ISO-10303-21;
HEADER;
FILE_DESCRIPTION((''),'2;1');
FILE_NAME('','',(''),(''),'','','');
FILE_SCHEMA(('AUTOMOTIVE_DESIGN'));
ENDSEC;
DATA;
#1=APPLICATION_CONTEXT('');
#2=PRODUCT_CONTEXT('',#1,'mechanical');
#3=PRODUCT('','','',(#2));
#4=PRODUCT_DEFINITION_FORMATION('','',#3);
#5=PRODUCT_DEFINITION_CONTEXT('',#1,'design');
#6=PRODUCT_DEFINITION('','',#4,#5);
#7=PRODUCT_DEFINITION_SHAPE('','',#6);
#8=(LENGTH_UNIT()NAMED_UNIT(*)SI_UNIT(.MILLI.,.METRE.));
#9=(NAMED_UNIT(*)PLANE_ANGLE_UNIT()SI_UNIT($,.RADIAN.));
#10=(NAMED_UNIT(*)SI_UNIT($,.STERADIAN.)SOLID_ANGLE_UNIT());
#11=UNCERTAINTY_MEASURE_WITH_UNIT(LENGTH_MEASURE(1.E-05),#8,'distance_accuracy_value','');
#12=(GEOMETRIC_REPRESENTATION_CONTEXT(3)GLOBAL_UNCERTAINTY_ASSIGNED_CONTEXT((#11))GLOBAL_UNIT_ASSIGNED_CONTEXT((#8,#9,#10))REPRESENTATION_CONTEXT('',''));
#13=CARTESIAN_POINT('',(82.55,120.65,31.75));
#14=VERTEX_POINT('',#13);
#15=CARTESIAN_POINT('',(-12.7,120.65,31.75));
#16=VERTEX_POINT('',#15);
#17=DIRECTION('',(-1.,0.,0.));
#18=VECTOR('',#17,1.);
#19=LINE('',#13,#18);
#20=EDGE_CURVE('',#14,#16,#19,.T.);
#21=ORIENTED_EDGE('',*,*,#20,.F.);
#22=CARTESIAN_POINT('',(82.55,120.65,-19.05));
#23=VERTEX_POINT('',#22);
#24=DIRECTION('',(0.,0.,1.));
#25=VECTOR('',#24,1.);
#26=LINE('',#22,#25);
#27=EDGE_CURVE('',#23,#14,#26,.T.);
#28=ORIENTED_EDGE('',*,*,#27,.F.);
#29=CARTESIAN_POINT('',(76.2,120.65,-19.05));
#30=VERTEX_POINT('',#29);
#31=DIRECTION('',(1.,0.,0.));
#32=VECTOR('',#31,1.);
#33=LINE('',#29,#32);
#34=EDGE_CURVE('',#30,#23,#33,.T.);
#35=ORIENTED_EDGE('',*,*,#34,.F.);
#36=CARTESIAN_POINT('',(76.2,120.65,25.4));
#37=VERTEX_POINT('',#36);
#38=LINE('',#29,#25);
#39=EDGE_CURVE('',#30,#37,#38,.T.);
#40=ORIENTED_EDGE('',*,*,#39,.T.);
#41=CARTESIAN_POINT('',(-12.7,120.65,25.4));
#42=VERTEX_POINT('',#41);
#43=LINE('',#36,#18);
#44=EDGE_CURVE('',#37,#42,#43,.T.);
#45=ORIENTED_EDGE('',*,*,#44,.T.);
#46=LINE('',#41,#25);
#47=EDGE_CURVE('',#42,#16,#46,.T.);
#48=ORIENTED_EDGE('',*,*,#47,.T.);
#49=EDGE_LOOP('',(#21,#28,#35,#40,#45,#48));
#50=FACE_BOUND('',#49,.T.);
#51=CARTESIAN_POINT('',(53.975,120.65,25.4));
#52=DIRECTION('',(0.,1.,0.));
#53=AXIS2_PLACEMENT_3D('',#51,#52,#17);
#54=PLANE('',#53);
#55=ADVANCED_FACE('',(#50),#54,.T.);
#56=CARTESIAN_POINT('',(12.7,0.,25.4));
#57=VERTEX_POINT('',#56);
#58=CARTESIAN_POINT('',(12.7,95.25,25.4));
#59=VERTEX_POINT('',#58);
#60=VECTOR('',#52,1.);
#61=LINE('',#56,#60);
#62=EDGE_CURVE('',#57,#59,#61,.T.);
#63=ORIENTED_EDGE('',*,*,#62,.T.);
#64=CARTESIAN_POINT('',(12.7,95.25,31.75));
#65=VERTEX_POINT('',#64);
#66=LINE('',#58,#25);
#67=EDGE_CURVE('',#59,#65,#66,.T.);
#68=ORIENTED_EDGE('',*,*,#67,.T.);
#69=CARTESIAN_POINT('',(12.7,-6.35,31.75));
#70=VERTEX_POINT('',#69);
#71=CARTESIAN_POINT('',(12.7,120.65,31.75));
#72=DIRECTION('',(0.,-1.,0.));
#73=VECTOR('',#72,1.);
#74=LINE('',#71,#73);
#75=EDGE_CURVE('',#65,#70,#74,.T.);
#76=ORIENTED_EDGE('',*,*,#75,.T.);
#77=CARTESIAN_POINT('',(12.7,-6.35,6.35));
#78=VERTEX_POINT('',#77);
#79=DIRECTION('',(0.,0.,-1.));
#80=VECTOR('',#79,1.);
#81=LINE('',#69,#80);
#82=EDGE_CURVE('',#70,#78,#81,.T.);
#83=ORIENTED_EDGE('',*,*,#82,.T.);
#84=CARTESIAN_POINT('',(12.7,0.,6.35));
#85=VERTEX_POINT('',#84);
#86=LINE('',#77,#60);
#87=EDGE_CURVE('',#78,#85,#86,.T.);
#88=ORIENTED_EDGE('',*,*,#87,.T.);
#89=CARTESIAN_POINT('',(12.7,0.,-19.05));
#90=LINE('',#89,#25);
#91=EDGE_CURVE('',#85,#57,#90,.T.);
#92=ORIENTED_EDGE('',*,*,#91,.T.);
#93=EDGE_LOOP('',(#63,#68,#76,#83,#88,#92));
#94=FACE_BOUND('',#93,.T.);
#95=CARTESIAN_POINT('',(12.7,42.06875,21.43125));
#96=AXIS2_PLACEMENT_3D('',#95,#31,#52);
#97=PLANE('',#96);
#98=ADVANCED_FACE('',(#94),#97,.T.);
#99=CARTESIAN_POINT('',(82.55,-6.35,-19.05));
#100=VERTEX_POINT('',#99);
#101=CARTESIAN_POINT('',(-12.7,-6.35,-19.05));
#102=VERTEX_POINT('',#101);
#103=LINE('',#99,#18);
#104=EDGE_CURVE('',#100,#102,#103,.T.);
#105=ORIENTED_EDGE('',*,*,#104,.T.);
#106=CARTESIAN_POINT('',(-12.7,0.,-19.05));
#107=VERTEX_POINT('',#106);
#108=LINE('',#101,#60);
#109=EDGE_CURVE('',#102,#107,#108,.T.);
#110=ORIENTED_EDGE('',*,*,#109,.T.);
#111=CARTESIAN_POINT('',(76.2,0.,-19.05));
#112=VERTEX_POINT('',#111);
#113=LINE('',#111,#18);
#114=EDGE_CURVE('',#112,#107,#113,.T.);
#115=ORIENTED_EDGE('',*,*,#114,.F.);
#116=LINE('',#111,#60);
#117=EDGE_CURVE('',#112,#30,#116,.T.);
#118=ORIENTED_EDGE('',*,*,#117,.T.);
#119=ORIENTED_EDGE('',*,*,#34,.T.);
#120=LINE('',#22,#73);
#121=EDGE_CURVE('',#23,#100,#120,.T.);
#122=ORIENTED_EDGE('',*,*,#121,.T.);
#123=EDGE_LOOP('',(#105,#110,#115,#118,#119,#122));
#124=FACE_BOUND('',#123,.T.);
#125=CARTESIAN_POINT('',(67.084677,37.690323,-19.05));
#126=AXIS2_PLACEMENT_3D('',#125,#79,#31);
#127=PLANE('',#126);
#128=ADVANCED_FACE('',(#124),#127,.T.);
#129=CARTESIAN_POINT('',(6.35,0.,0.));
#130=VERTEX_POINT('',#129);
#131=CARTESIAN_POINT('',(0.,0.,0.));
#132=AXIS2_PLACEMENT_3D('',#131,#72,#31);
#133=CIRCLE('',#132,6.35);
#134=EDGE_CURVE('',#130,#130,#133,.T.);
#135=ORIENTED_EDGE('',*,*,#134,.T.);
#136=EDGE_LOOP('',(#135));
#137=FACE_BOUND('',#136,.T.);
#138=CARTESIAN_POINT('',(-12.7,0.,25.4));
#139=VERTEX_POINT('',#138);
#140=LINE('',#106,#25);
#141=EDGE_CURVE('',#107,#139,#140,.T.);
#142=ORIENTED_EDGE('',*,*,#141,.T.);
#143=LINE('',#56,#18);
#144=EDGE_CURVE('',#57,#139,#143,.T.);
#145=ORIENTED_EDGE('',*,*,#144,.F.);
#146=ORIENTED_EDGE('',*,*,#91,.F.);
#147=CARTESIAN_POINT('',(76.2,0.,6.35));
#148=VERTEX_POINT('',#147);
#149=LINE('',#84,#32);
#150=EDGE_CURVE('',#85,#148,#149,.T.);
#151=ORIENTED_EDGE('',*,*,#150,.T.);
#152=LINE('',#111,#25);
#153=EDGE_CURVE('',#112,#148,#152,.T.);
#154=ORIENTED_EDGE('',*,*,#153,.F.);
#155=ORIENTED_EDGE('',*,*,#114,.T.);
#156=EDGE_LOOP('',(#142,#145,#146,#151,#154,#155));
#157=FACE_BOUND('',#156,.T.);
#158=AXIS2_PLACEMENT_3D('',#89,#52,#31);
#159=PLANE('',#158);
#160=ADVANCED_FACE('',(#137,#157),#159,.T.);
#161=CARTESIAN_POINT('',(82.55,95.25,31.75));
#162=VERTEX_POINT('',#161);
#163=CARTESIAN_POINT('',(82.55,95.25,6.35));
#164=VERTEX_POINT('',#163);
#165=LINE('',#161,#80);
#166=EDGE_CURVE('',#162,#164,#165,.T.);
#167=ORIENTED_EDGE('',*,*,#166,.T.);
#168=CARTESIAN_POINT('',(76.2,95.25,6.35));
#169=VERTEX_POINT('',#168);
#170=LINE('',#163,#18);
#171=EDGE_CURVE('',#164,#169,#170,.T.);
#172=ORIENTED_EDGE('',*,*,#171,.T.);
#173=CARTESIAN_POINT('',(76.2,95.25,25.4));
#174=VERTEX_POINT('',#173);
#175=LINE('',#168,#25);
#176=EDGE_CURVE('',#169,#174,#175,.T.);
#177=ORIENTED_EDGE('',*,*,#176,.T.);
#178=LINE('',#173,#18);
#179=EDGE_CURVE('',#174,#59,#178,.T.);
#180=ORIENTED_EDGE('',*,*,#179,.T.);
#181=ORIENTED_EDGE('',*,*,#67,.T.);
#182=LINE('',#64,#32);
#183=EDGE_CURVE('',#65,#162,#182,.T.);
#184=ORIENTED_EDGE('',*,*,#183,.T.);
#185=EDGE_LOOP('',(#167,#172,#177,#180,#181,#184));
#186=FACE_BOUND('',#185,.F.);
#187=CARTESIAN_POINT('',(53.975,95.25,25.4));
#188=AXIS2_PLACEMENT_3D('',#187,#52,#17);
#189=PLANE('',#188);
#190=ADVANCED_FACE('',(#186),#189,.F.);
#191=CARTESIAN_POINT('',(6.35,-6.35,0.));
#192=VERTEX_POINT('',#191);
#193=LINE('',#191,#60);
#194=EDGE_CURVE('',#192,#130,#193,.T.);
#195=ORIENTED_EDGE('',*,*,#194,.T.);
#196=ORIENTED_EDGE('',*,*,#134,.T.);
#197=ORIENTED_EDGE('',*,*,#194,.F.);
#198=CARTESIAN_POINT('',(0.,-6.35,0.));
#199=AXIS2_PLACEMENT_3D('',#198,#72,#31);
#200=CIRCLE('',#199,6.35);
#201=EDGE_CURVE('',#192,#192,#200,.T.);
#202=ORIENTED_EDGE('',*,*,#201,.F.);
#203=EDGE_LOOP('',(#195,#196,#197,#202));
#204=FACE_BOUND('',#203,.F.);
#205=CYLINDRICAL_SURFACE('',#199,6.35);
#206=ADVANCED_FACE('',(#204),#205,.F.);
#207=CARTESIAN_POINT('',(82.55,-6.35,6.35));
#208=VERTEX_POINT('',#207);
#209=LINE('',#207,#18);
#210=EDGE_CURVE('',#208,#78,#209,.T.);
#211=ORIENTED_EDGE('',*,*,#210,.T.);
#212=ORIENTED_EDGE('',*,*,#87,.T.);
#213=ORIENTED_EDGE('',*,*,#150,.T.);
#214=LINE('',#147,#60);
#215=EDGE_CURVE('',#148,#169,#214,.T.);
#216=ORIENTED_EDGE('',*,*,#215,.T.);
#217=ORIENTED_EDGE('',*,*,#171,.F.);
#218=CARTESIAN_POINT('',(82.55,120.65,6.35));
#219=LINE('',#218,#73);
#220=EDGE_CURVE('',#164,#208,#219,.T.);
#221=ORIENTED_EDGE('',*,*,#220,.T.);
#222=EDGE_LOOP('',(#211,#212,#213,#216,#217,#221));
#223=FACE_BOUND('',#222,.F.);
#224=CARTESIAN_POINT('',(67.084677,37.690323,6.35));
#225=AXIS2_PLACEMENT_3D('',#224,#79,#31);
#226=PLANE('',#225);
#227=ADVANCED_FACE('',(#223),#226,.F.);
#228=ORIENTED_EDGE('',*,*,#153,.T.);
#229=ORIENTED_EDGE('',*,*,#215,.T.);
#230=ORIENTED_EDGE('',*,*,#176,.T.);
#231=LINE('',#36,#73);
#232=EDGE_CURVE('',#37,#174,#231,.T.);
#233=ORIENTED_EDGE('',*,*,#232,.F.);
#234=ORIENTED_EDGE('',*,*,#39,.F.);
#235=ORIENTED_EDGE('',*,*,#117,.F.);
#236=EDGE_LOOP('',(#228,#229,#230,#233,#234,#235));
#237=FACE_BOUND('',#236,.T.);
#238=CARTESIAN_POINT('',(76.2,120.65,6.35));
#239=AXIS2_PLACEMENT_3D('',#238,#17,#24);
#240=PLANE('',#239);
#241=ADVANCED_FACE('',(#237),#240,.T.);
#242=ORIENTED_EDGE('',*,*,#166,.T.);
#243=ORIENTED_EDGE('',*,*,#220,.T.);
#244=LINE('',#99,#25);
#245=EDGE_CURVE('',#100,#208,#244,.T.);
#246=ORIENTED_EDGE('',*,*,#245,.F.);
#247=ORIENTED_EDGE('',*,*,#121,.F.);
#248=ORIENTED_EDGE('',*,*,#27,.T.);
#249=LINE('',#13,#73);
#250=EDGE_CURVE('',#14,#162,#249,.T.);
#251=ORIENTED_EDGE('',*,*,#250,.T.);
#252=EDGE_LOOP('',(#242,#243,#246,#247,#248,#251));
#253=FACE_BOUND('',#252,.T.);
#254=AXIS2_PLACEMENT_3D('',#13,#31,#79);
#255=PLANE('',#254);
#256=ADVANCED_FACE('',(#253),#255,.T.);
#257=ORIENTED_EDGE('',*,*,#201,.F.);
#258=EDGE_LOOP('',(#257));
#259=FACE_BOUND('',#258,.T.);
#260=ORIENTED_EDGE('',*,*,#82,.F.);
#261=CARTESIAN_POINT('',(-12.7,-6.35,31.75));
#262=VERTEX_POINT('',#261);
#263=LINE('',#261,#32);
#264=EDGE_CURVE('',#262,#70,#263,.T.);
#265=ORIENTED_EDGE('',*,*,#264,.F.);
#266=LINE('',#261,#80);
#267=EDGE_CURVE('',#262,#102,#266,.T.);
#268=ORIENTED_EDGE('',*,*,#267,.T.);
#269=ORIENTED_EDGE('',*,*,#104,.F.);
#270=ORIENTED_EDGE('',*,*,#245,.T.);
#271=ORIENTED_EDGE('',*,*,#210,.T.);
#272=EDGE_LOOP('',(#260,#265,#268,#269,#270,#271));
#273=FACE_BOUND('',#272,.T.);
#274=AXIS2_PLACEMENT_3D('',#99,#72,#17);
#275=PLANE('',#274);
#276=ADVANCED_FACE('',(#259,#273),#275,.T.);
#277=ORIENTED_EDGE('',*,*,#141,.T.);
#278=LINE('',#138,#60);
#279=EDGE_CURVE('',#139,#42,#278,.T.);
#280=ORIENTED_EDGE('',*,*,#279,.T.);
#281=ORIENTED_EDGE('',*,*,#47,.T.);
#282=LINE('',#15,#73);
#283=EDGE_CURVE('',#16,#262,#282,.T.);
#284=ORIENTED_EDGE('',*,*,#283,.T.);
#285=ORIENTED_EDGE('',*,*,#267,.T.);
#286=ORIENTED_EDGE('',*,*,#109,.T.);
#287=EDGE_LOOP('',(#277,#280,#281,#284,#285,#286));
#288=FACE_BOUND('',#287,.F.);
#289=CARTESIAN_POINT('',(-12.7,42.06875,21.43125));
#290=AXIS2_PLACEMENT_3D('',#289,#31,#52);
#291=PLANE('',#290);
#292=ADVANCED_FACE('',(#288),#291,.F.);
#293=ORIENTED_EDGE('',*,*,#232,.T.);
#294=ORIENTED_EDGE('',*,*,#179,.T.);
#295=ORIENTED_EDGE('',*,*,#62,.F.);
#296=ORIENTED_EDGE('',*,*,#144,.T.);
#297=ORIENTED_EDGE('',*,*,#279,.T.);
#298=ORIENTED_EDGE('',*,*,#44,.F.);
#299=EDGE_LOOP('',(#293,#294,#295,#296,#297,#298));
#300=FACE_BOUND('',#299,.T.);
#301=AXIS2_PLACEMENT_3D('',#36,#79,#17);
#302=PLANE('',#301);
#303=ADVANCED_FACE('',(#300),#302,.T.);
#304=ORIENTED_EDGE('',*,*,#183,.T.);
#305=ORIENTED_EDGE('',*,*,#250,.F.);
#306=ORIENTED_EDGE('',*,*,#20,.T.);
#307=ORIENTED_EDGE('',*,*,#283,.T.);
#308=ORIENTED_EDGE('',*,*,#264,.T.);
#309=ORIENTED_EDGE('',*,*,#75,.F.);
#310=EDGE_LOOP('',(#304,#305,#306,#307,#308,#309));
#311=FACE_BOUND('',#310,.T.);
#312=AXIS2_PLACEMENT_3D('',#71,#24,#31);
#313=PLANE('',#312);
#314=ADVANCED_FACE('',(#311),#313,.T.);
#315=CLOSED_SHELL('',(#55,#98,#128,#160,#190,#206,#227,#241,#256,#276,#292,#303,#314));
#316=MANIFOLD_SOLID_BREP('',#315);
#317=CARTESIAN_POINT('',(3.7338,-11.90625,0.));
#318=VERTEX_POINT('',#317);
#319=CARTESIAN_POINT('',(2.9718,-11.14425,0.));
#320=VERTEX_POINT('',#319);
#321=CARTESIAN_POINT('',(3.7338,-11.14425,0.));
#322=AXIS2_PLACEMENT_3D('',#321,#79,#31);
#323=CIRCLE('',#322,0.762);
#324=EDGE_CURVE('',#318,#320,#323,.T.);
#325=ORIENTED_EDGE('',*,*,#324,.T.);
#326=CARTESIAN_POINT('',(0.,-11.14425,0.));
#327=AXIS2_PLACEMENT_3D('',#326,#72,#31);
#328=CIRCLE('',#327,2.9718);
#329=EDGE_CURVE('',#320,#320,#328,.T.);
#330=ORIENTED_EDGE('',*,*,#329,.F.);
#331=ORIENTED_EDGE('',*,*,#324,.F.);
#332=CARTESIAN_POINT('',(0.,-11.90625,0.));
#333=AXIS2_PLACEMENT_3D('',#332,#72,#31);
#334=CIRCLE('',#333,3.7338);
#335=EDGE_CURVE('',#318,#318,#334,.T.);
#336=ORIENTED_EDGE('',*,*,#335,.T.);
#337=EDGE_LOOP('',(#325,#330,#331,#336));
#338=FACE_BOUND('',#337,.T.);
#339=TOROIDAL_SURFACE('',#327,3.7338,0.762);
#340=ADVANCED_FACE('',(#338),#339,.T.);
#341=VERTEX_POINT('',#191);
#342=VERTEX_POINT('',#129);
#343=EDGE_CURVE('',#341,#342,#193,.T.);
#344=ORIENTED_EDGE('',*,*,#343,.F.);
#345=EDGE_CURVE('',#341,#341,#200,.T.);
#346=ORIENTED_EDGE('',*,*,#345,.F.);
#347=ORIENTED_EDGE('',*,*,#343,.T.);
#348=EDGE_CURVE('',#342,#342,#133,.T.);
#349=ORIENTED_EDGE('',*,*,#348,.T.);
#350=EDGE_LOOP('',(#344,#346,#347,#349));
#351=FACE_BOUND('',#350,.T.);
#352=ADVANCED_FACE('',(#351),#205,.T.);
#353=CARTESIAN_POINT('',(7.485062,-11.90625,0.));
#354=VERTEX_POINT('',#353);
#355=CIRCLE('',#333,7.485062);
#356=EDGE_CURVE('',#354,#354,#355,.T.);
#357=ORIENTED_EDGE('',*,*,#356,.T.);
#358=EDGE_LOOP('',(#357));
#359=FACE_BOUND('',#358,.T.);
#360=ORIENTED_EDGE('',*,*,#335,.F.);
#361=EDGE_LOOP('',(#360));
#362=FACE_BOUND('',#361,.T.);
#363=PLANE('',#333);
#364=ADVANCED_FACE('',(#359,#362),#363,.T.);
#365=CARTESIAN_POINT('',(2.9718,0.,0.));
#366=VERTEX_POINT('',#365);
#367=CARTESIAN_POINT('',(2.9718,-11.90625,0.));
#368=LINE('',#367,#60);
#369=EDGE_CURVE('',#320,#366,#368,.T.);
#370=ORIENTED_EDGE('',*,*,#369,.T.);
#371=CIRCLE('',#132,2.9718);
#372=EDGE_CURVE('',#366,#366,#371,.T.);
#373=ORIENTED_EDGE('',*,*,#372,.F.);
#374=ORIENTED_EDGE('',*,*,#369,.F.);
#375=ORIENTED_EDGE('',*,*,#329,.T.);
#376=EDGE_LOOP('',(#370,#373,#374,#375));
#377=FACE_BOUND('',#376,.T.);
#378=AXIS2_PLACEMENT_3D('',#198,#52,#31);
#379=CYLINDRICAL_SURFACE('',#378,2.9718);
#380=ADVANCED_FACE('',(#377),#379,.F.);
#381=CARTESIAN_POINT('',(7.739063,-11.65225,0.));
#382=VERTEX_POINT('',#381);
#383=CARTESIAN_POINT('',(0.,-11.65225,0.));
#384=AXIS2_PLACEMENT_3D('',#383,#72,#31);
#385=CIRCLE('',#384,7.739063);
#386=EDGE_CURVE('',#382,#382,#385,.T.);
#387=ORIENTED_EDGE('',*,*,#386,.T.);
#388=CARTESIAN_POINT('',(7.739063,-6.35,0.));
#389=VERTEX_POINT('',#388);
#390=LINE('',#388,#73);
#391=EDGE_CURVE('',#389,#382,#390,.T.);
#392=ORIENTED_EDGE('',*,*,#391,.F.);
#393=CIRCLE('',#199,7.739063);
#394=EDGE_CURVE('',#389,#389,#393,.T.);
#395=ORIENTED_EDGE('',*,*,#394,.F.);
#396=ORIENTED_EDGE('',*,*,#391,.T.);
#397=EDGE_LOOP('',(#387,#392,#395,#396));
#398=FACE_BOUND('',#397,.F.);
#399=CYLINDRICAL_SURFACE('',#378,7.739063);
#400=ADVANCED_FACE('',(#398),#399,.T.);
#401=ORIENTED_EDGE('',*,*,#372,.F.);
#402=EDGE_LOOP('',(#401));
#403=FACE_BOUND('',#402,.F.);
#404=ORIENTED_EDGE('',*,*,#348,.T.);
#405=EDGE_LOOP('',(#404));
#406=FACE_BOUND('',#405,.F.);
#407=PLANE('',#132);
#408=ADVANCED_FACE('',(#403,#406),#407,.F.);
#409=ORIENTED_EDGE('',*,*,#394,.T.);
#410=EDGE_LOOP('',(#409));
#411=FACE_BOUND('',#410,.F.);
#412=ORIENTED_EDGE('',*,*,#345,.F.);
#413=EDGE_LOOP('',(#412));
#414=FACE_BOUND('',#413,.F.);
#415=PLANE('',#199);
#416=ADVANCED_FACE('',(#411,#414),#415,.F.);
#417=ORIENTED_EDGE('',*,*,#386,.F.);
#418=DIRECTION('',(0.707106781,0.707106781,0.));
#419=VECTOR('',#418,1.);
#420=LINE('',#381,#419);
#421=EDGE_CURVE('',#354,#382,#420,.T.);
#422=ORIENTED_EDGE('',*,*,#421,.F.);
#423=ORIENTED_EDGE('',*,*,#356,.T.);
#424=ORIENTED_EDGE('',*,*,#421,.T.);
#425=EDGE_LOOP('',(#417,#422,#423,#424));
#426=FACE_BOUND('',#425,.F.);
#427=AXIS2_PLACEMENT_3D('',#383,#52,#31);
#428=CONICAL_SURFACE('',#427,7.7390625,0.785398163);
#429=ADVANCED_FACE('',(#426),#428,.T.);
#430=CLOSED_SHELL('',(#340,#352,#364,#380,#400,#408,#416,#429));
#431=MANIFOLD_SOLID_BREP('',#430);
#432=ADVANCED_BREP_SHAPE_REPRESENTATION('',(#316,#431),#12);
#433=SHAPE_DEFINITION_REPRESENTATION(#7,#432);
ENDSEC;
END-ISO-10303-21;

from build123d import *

# Parameters (mm, degrees)
F1_DEPTH      = 12.7
F1_DEPTH_BACK = 12.7
F3_DEPTH      = 25.4
F5_DEPTH      = 25.4
F6_R          = 6.35
F7_DEPTH      = 6.35
F8_R          = 6.35
F8_R_2        = 2.9718
F9_DEPTH      = 6.35
F10_R         = 7.7390625
F10_R_2       = 2.9718
F11_DEPTH     = 5.55625
F12_R         = 0.762
F13_SIZE      = 0.254


with BuildPart() as f1:
    # F0 (on Right) → F1 (new body, two sides)
    with BuildSketch(Plane.YZ) as f1_sk:
        Polygon((120.65, 25.4), (120.65, 31.75), (-6.35, 31.75), (-6.35, -19.05), (0, -19.05), (0, 25.4), align=None)
    extrude(amount=F1_DEPTH)
    extrude(f1_sk.sketch, amount=-F1_DEPTH_BACK)

    # F2 (on face) → F3 (join)
    with BuildSketch(Plane(origin=(0, 0, -19.05), x_dir=(1, 0, 0), z_dir=(0, 0, -1))):
        Polygon((12.7, 6.35), (12.7, 0), (76.2, 0), (76.2, -120.65), (82.55, -120.65), (82.55, 6.35), align=None)
    extrude(amount=-F3_DEPTH)

    # F4 (on face) → F5 (join)
    with BuildSketch(Plane(origin=(0, 120.65, 0), x_dir=(-1, 0, 0), z_dir=(0, 1, 0))):
        Polygon((-12.7, 25.4), (-12.7, 31.75), (-82.55, 31.75), (-82.55, 6.35), (-76.2, 6.35), (-76.2, 25.4), align=None)
    extrude(amount=-F5_DEPTH)

    # F6 (on face) → F7 (cut, through all)
    with BuildSketch(Plane.XZ.offset(6.35)):
        Circle(F6_R)
    extrude(amount=-F7_DEPTH, mode=Mode.SUBTRACT)


with BuildPart() as f9:
    # F8 (on face) → F9 (new body)
    with BuildSketch(Plane.XZ.offset(6.35)):
        Circle(F8_R)
        Circle(F8_R_2, mode=Mode.SUBTRACT)
    extrude(amount=-F9_DEPTH)

    # F10 (on face) → F11 (join)
    with BuildSketch(Plane.XZ.offset(6.35)):
        Circle(F10_R)
        Circle(F10_R_2, mode=Mode.SUBTRACT)
    extrude(amount=F11_DEPTH)

    # F12
    f12_edges = [f9.edges().sort_by_distance(p)[0] for p in [
        (-2.9718, -11.90625, 0),
    ]]
    fillet(f12_edges, radius=F12_R)

    # F13
    f13_edges = [f9.edges().sort_by_distance(p)[0] for p in [
        (-7.739063, -11.90625, 0),
    ]]
    chamfer(f13_edges, length=F13_SIZE)


solid = Compound([f1.part, f9.part])
